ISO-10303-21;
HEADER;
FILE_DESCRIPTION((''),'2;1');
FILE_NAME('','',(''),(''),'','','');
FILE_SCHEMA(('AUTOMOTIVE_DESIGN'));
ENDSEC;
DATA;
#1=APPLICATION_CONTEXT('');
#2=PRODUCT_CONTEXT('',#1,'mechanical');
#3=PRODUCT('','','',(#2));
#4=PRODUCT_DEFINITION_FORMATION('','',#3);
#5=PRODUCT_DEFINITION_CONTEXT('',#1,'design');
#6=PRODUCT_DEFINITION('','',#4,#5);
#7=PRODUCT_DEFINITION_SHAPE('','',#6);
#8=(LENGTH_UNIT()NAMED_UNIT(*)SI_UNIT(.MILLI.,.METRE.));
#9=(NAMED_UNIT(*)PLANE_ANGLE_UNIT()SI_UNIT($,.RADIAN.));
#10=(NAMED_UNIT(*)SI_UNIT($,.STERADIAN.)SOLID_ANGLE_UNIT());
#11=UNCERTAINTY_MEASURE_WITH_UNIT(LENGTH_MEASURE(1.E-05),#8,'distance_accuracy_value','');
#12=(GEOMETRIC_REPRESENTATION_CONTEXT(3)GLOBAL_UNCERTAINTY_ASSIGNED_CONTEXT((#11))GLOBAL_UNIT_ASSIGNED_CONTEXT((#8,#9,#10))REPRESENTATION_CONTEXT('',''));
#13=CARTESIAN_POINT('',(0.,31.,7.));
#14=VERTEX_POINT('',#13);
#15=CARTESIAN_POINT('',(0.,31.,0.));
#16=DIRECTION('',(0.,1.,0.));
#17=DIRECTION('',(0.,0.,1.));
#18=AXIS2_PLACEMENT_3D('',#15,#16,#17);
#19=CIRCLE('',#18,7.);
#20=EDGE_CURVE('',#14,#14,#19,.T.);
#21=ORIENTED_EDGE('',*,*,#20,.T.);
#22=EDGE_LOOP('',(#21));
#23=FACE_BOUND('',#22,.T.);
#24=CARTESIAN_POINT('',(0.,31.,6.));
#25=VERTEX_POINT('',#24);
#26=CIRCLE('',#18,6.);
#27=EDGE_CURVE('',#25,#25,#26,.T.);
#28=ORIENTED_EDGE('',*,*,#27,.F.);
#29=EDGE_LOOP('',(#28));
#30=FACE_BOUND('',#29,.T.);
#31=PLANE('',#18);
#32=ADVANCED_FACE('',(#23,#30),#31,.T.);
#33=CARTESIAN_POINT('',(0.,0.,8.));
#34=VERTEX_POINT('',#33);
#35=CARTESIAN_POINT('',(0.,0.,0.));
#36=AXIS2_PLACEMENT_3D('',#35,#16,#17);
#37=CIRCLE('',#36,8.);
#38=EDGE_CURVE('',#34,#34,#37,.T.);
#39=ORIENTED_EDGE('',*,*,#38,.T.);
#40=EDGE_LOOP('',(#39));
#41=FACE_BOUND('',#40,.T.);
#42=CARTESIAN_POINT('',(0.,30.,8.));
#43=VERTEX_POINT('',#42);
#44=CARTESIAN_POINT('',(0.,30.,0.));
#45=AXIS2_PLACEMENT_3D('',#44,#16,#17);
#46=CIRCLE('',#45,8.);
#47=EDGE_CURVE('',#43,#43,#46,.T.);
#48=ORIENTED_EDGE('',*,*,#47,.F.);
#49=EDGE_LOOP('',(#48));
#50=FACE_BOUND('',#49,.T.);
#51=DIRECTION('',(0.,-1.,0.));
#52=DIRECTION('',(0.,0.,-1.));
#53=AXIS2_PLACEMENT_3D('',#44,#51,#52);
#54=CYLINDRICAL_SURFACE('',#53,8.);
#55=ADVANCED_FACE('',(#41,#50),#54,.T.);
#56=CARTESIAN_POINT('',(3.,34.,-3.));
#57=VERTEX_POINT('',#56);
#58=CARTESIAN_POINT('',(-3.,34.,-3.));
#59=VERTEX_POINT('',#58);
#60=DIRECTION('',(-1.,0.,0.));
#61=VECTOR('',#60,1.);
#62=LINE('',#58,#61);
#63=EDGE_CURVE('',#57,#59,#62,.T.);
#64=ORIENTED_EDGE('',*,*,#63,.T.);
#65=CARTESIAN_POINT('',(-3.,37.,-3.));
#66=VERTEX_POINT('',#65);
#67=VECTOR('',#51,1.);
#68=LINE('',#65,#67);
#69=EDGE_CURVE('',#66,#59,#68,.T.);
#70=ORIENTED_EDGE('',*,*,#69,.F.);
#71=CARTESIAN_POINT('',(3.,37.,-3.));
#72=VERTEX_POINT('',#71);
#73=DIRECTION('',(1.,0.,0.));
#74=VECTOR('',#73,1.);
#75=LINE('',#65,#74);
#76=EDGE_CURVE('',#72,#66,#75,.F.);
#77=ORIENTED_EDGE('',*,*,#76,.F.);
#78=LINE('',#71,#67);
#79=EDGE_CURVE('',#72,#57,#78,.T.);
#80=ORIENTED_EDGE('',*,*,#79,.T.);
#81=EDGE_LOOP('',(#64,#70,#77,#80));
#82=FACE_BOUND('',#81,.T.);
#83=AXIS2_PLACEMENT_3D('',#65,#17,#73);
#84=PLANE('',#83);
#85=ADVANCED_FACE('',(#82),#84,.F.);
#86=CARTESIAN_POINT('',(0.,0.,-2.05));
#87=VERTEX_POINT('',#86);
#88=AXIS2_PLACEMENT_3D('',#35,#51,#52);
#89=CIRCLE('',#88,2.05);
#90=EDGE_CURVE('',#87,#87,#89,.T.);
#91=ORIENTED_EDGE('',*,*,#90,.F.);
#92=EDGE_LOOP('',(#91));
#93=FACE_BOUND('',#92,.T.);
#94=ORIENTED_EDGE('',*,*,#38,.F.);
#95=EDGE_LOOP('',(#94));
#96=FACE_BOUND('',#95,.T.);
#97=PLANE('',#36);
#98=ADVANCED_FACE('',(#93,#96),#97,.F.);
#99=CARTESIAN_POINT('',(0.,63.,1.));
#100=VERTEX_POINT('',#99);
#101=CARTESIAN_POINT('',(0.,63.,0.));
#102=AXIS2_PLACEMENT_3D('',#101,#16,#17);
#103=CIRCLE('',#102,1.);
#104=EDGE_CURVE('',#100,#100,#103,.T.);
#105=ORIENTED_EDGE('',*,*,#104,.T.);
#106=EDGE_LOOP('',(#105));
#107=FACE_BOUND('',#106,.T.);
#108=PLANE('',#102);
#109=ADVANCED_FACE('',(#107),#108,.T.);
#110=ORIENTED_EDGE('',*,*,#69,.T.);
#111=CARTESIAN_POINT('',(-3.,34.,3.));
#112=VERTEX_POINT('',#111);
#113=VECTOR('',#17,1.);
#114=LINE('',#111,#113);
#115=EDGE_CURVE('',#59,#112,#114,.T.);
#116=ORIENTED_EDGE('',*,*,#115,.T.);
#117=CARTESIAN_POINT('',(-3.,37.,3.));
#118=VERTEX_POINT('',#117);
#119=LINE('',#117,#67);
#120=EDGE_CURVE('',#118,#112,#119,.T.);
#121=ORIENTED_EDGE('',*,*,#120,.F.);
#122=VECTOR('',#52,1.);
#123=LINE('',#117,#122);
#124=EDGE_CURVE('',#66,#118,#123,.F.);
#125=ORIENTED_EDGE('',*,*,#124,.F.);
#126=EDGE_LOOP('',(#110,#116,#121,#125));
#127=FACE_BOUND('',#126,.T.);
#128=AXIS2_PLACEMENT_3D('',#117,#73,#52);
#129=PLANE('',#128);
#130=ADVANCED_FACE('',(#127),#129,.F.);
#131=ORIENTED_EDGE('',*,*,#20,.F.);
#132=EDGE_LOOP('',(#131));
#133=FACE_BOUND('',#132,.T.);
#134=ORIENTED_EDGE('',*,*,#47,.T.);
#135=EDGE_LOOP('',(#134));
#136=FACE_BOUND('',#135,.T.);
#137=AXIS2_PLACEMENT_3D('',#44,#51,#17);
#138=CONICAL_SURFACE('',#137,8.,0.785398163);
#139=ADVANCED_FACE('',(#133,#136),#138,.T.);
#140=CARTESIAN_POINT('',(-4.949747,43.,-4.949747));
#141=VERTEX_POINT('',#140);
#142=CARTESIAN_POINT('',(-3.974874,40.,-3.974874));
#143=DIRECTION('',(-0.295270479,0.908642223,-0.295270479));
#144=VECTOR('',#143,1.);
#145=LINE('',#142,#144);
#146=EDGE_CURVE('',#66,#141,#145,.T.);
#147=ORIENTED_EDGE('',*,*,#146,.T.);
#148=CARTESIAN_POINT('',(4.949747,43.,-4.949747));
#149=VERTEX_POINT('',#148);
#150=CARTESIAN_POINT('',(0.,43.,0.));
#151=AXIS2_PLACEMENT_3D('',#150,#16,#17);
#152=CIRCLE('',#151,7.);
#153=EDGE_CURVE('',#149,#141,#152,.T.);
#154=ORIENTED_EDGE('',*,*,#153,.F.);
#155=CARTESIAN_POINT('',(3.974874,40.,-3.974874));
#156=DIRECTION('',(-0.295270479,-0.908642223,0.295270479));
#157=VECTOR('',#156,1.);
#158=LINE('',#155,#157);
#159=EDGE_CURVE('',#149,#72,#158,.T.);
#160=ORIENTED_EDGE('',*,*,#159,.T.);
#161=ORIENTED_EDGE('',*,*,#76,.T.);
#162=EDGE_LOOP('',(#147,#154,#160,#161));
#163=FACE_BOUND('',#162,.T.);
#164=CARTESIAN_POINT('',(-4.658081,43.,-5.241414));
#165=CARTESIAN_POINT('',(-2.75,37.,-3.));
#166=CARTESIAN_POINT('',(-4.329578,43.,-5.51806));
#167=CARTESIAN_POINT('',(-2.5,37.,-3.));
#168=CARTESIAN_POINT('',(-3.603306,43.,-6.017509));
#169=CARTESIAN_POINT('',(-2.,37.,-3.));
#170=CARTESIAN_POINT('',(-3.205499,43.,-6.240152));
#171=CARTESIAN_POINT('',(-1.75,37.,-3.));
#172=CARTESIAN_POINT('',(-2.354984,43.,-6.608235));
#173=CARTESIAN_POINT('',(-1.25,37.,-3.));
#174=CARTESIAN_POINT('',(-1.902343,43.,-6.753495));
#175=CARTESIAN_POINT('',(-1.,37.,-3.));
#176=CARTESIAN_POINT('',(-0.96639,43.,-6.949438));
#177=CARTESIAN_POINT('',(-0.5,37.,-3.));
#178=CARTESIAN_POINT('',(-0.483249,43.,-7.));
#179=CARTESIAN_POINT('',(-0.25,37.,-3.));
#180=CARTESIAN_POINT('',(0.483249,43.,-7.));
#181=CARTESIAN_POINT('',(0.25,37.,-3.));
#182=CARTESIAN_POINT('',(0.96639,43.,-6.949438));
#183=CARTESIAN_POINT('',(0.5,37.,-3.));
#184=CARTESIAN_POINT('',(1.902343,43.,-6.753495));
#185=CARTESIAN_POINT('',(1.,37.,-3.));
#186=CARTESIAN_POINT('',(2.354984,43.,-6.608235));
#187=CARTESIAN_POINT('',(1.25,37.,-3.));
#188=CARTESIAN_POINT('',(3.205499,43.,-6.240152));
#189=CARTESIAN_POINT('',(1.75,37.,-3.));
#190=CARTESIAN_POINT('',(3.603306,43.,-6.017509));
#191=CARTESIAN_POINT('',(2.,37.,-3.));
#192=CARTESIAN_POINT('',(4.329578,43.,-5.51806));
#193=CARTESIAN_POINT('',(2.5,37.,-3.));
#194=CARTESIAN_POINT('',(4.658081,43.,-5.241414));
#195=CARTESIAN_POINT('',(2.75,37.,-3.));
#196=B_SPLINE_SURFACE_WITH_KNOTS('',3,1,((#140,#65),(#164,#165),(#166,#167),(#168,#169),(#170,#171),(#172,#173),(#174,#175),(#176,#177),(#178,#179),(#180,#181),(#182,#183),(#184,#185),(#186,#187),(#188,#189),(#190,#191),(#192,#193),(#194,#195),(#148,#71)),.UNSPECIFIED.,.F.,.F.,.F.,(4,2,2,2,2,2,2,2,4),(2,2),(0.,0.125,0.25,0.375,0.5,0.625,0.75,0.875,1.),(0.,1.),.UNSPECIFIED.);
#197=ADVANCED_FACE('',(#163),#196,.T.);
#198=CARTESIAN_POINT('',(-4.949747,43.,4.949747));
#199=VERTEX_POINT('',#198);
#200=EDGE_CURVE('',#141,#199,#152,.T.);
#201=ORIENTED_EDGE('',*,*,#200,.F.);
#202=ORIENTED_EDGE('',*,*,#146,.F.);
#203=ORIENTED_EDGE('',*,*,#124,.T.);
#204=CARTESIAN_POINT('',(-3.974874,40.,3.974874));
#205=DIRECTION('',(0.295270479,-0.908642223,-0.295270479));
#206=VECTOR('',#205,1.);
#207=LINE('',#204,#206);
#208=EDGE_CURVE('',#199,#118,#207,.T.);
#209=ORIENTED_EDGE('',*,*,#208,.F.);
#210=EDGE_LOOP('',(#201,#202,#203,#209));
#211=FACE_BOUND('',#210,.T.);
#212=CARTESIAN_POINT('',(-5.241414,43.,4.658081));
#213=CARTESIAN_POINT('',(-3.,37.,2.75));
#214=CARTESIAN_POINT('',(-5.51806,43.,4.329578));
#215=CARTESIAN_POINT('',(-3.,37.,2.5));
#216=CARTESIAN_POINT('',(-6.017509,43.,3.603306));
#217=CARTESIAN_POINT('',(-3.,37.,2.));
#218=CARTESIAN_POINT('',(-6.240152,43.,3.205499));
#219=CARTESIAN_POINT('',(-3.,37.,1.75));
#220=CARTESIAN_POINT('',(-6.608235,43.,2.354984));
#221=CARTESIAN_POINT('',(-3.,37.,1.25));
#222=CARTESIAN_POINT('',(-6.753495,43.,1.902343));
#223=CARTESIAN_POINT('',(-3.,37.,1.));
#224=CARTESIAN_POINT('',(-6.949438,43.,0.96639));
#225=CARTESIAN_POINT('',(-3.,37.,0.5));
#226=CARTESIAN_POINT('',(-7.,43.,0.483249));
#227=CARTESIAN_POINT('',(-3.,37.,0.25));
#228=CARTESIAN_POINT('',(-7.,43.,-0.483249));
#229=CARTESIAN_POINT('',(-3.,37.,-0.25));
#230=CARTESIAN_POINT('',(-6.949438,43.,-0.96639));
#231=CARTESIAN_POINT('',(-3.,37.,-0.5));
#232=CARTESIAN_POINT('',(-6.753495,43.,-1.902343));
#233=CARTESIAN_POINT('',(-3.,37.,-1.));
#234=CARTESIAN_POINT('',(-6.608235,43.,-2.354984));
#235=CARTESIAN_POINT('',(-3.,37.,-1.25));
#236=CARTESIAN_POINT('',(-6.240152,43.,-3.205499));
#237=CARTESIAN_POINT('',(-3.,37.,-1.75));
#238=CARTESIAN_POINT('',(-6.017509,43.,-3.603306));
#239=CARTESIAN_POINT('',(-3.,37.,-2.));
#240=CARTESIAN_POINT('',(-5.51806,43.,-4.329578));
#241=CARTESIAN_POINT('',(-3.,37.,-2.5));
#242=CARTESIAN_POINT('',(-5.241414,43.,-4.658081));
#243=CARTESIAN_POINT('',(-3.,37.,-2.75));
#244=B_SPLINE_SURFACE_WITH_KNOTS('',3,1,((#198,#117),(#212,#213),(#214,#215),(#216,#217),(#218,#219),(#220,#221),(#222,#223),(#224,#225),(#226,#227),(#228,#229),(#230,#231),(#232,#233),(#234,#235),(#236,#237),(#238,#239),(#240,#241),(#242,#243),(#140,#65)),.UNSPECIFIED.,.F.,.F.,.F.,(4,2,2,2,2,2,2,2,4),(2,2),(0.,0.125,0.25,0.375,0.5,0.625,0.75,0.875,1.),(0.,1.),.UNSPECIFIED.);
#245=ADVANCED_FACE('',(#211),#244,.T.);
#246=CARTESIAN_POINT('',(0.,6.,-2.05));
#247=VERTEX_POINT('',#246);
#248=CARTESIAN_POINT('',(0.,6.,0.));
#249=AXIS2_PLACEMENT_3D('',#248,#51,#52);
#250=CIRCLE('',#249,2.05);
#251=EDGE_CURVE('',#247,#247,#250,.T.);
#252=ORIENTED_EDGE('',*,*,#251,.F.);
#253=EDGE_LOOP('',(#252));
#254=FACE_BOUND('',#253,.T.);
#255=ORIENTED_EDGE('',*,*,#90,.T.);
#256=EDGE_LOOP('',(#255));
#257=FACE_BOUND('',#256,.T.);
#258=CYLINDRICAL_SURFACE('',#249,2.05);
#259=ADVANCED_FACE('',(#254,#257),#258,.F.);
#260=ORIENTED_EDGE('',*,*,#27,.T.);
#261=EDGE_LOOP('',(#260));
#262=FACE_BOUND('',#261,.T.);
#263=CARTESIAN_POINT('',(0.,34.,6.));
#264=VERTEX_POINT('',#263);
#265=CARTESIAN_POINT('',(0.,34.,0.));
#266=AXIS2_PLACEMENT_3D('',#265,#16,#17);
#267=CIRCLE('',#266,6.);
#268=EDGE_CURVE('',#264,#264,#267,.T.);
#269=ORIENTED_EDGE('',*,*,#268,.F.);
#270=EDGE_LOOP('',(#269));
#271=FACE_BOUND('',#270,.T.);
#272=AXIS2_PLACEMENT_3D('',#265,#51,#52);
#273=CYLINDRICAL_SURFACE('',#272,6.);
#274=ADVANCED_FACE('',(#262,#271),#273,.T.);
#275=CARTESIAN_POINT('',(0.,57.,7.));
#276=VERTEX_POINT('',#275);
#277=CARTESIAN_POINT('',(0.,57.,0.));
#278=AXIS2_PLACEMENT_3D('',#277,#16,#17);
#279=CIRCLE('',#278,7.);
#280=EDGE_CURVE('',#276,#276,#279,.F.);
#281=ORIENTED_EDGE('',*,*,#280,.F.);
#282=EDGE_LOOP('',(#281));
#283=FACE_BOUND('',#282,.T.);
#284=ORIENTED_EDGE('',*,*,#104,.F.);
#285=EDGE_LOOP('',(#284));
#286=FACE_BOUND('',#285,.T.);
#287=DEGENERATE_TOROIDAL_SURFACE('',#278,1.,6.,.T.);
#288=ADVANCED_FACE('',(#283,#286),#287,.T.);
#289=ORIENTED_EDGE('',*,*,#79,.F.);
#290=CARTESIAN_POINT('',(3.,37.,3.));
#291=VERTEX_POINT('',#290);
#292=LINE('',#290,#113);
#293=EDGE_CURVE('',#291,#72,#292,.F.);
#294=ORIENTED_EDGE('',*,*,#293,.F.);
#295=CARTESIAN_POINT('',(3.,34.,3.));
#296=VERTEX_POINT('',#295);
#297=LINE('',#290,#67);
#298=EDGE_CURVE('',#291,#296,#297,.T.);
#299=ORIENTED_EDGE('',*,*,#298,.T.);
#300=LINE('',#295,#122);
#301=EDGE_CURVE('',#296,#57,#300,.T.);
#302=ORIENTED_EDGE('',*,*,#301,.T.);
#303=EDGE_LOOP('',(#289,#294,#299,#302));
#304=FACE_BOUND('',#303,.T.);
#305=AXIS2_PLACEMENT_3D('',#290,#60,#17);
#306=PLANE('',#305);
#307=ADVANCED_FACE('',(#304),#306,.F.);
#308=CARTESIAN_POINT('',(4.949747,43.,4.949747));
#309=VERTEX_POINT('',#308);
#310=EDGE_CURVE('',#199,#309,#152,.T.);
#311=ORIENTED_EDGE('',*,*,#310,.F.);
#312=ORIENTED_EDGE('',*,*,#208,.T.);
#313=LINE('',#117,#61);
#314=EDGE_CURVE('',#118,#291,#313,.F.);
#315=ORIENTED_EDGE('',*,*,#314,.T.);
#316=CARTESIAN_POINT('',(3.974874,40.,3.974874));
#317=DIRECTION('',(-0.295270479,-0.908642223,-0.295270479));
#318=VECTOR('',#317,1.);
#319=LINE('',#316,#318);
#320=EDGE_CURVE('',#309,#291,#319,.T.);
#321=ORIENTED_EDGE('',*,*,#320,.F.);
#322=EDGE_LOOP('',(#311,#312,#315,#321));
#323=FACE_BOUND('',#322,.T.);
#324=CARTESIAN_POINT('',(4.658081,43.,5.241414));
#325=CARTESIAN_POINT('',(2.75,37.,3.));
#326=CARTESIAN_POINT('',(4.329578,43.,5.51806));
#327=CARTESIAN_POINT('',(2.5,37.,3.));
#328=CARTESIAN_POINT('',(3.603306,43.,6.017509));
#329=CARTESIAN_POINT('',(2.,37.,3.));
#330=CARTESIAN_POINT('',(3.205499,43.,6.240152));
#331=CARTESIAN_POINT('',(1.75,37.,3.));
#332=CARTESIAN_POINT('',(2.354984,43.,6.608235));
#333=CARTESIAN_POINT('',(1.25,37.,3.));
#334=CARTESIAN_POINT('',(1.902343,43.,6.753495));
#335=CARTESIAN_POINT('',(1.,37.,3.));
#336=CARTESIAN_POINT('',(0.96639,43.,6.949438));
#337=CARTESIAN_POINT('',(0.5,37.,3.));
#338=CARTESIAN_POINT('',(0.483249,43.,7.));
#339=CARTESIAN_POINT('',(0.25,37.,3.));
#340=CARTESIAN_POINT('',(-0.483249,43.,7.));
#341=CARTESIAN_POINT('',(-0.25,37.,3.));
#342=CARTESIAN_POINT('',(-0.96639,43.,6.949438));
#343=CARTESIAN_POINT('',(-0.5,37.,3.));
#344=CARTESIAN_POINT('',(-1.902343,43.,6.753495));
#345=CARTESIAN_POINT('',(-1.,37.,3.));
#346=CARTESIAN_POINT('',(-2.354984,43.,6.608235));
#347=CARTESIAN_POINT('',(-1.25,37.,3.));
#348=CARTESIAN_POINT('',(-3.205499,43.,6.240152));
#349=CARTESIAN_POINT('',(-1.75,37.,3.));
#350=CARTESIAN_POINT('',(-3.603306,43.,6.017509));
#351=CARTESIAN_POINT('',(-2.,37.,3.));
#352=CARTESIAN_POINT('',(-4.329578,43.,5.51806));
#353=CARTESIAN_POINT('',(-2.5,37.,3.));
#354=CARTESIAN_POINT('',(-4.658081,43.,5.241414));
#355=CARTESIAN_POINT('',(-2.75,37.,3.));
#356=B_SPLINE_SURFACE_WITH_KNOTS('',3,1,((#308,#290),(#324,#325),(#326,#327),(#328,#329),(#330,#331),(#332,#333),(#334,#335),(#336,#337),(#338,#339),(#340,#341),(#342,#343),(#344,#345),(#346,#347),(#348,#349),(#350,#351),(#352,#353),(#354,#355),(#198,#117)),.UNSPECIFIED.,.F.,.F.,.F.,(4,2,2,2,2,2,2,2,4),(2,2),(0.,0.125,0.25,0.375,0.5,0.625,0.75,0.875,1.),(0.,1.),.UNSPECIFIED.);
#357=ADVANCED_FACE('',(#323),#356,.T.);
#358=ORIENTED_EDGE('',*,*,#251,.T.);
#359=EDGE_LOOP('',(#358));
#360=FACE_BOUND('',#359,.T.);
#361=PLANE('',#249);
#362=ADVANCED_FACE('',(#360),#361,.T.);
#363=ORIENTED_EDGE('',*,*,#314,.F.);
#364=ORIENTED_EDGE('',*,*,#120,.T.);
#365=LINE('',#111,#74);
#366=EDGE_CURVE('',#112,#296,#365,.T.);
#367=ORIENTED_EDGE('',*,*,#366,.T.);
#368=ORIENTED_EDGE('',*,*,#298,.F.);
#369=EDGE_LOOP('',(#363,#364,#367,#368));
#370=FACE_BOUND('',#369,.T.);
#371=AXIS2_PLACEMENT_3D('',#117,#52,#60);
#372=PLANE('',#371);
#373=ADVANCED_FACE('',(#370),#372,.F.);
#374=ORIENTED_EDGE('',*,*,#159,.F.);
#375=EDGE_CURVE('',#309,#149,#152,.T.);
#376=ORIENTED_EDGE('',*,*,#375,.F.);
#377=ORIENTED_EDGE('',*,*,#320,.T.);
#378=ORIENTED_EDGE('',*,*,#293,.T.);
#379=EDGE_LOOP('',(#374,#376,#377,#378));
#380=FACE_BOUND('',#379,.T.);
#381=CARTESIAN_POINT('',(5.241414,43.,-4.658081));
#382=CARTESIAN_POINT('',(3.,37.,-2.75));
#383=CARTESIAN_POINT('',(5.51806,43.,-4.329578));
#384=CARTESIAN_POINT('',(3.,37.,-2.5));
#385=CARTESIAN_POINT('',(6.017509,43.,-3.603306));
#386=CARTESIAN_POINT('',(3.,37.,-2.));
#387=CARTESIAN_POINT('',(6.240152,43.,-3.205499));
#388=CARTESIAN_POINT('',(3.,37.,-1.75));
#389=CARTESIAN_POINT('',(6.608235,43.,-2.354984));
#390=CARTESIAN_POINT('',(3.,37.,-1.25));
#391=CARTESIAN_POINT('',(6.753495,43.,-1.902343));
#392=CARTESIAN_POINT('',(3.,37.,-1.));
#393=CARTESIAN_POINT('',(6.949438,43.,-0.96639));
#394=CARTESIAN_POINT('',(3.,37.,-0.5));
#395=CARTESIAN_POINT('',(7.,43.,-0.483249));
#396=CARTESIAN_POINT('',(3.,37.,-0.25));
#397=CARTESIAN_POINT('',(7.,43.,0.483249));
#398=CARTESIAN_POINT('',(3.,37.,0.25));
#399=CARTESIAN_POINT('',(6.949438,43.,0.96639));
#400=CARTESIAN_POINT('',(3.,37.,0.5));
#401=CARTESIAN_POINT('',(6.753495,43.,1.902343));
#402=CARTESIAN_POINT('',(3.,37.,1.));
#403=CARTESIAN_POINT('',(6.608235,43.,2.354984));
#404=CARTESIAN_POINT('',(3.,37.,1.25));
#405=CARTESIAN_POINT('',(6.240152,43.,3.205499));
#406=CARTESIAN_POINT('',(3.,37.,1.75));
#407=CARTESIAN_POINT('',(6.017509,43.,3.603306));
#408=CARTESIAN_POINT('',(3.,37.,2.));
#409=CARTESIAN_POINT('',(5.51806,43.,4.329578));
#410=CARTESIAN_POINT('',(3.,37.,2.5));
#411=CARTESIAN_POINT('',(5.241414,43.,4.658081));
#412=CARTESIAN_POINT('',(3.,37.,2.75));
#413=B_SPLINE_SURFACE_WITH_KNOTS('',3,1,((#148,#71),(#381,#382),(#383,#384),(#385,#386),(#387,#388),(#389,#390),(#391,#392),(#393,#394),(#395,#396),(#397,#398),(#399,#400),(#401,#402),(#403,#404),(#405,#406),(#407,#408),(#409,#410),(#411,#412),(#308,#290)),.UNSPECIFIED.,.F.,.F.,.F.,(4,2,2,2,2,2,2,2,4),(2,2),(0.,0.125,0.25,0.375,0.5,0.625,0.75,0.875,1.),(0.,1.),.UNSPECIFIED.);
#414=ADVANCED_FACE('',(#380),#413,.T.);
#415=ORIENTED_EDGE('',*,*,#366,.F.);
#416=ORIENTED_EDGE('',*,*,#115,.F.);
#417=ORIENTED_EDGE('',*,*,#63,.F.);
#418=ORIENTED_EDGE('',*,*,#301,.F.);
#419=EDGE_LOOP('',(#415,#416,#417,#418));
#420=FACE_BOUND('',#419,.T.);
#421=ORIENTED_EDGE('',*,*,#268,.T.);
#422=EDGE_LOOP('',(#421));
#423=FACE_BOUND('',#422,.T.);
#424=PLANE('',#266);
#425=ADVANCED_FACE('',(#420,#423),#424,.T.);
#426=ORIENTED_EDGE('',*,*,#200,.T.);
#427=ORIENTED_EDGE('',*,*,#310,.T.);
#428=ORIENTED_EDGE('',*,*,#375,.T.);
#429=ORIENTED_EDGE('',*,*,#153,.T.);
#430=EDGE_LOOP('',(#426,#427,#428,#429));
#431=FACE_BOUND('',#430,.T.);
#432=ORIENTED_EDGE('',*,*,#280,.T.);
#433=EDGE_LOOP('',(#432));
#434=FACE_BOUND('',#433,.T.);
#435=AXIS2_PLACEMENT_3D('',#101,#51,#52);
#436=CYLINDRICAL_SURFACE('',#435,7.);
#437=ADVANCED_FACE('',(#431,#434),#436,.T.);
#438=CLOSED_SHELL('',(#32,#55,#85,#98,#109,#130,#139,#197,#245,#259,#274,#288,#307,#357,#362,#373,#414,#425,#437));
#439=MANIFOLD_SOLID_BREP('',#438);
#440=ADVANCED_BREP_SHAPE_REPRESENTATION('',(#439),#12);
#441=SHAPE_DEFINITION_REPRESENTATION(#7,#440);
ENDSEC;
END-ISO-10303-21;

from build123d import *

# Parameters (mm, degrees)
SKETCH1_R           = 8
BOSS_EXTRUDE1_DEPTH = 30
SKETCH2_R           = 8
BOSS_EXTRUDE2_DEPTH = 1
BOSS_EXTRUDE2_TAPER = 45
SKETCH3_R           = 6
BOSS_EXTRUDE3_DEPTH = 3
SKETCH4_W           = 6
SKETCH4_H           = 6
BOSS_EXTRUDE4_DEPTH = 3
BOSS_EXTRUDE5_DEPTH = 20
SKETCH9_R           = 2.05
CUT_EXTRUDE1_DEPTH  = 6


with BuildPart() as part:
    # Sketch1 → Boss-Extrude1 (new body)
    with BuildSketch(Plane(origin=(0, 0, 0), x_dir=(1, 0, 0), z_dir=(0, 1, 0))):
        with Locations(Location((0, 0, 0), (0, 0, 270))):
            Circle(SKETCH1_R)
    extrude(amount=BOSS_EXTRUDE1_DEPTH)

    # Sketch2 → Boss-Extrude2 (add)
    with BuildSketch(Plane(origin=(0, 30, 0), x_dir=(1, 0, 0), z_dir=(0, 1, 0))):
        with Locations(Location((0, 0, 0), (0, 0, 270))):
            Circle(SKETCH2_R)
    extrude(amount=BOSS_EXTRUDE2_DEPTH, taper=BOSS_EXTRUDE2_TAPER)

    # Sketch3 → Boss-Extrude3 (add)
    with BuildSketch(Plane(origin=(0, 31, 0), x_dir=(1, 0, 0), z_dir=(0, 1, 0))):
        with Locations(Location((0, 0, 0), (0, 0, 270))):
            Circle(SKETCH3_R)
    extrude(amount=BOSS_EXTRUDE3_DEPTH)

    # Sketch4 → Boss-Extrude4 (add)
    with BuildSketch(Plane(origin=(0, 34, 0), x_dir=(1, 0, 0), z_dir=(0, 1, 0))):
        Rectangle(SKETCH4_W, SKETCH4_H)
    extrude(amount=BOSS_EXTRUDE4_DEPTH)

    # Sketch6 for Loft1 → Loft1 section 0
    with BuildSketch(Plane(origin=(0, 43, 0), x_dir=(1, 0, 0), z_dir=(0, 1, 0))):
        with BuildLine():
            # circular arc as an exact rational Bezier (weights 1, cos(half-angle), 1)
            Bezier((4.949747468, -4.949747468), (9.899494937, 0), (4.949747468, 4.949747468), weights=[1, 0.707106781, 1])
            Bezier((4.949747468, 4.949747468), (0, 9.899494937), (-4.949747468, 4.949747468), weights=[1, 0.707106781, 1])
            Bezier((-4.949747468, 4.949747468), (-9.899494937, 0), (-4.949747468, -4.949747468), weights=[1, 0.707106781, 1])
            Bezier((-4.949747468, -4.949747468), (0, -9.899494937), (4.949747468, -4.949747468), weights=[1, 0.707106781, 1])
        make_face()
    # Sketch5 → Loft1 section 1
    with BuildSketch(Plane(origin=(0, 37, 0), x_dir=(1, 0, 0), z_dir=(0, 1, 0))):
        with BuildLine():
            Line((3, -3), (3, 3))
            Line((3, 3), (-3, 3))
            Line((-3, 3), (-3, -3))
            Line((-3, -3), (3, -3))
        make_face()
    loft()

    # Sketch7 → Boss-Extrude5 (add)
    with BuildSketch(Plane(origin=(0, 43, 0), x_dir=(1, 0, 0), z_dir=(0, 1, 0))):
        with BuildLine():
            ThreePointArc((4.949747468, -4.949747468), (7, 0), (4.949747468, 4.949747468))
            ThreePointArc((4.949747468, 4.949747468), (0, 7), (-4.949747468, 4.949747468))
            ThreePointArc((-4.949747468, 4.949747468), (-7, 0), (-4.949747468, -4.949747468))
            ThreePointArc((-4.949747468, -4.949747468), (0, -7), (4.949747468, -4.949747468))
        make_face()
    extrude(amount=BOSS_EXTRUDE5_DEPTH)

    # Fillet1: read off the stored shape, not the designer's step
    # Fillet1 outline → Fillet1 (revolve, cut)
    with BuildSketch(Plane.XY):
        with BuildLine():
            ThreePointArc((1, 63), (5.242640687, 61.242640687), (7, 57))
            Line((7, 57), (7, 63))
            Line((7, 63), (1, 63))
        make_face()
    revolve(axis=Axis((0, 0, 0), (0, 1, 0)), mode=Mode.SUBTRACT)

    # Sketch9 → Cut-Extrude1 (cut)
    with BuildSketch(Plane.XZ):
        with Locations(Location((0, 0, 0), (0, 0, 270))):
            Circle(SKETCH9_R)
    extrude(amount=-CUT_EXTRUDE1_DEPTH, mode=Mode.SUBTRACT)


solid = part.part
